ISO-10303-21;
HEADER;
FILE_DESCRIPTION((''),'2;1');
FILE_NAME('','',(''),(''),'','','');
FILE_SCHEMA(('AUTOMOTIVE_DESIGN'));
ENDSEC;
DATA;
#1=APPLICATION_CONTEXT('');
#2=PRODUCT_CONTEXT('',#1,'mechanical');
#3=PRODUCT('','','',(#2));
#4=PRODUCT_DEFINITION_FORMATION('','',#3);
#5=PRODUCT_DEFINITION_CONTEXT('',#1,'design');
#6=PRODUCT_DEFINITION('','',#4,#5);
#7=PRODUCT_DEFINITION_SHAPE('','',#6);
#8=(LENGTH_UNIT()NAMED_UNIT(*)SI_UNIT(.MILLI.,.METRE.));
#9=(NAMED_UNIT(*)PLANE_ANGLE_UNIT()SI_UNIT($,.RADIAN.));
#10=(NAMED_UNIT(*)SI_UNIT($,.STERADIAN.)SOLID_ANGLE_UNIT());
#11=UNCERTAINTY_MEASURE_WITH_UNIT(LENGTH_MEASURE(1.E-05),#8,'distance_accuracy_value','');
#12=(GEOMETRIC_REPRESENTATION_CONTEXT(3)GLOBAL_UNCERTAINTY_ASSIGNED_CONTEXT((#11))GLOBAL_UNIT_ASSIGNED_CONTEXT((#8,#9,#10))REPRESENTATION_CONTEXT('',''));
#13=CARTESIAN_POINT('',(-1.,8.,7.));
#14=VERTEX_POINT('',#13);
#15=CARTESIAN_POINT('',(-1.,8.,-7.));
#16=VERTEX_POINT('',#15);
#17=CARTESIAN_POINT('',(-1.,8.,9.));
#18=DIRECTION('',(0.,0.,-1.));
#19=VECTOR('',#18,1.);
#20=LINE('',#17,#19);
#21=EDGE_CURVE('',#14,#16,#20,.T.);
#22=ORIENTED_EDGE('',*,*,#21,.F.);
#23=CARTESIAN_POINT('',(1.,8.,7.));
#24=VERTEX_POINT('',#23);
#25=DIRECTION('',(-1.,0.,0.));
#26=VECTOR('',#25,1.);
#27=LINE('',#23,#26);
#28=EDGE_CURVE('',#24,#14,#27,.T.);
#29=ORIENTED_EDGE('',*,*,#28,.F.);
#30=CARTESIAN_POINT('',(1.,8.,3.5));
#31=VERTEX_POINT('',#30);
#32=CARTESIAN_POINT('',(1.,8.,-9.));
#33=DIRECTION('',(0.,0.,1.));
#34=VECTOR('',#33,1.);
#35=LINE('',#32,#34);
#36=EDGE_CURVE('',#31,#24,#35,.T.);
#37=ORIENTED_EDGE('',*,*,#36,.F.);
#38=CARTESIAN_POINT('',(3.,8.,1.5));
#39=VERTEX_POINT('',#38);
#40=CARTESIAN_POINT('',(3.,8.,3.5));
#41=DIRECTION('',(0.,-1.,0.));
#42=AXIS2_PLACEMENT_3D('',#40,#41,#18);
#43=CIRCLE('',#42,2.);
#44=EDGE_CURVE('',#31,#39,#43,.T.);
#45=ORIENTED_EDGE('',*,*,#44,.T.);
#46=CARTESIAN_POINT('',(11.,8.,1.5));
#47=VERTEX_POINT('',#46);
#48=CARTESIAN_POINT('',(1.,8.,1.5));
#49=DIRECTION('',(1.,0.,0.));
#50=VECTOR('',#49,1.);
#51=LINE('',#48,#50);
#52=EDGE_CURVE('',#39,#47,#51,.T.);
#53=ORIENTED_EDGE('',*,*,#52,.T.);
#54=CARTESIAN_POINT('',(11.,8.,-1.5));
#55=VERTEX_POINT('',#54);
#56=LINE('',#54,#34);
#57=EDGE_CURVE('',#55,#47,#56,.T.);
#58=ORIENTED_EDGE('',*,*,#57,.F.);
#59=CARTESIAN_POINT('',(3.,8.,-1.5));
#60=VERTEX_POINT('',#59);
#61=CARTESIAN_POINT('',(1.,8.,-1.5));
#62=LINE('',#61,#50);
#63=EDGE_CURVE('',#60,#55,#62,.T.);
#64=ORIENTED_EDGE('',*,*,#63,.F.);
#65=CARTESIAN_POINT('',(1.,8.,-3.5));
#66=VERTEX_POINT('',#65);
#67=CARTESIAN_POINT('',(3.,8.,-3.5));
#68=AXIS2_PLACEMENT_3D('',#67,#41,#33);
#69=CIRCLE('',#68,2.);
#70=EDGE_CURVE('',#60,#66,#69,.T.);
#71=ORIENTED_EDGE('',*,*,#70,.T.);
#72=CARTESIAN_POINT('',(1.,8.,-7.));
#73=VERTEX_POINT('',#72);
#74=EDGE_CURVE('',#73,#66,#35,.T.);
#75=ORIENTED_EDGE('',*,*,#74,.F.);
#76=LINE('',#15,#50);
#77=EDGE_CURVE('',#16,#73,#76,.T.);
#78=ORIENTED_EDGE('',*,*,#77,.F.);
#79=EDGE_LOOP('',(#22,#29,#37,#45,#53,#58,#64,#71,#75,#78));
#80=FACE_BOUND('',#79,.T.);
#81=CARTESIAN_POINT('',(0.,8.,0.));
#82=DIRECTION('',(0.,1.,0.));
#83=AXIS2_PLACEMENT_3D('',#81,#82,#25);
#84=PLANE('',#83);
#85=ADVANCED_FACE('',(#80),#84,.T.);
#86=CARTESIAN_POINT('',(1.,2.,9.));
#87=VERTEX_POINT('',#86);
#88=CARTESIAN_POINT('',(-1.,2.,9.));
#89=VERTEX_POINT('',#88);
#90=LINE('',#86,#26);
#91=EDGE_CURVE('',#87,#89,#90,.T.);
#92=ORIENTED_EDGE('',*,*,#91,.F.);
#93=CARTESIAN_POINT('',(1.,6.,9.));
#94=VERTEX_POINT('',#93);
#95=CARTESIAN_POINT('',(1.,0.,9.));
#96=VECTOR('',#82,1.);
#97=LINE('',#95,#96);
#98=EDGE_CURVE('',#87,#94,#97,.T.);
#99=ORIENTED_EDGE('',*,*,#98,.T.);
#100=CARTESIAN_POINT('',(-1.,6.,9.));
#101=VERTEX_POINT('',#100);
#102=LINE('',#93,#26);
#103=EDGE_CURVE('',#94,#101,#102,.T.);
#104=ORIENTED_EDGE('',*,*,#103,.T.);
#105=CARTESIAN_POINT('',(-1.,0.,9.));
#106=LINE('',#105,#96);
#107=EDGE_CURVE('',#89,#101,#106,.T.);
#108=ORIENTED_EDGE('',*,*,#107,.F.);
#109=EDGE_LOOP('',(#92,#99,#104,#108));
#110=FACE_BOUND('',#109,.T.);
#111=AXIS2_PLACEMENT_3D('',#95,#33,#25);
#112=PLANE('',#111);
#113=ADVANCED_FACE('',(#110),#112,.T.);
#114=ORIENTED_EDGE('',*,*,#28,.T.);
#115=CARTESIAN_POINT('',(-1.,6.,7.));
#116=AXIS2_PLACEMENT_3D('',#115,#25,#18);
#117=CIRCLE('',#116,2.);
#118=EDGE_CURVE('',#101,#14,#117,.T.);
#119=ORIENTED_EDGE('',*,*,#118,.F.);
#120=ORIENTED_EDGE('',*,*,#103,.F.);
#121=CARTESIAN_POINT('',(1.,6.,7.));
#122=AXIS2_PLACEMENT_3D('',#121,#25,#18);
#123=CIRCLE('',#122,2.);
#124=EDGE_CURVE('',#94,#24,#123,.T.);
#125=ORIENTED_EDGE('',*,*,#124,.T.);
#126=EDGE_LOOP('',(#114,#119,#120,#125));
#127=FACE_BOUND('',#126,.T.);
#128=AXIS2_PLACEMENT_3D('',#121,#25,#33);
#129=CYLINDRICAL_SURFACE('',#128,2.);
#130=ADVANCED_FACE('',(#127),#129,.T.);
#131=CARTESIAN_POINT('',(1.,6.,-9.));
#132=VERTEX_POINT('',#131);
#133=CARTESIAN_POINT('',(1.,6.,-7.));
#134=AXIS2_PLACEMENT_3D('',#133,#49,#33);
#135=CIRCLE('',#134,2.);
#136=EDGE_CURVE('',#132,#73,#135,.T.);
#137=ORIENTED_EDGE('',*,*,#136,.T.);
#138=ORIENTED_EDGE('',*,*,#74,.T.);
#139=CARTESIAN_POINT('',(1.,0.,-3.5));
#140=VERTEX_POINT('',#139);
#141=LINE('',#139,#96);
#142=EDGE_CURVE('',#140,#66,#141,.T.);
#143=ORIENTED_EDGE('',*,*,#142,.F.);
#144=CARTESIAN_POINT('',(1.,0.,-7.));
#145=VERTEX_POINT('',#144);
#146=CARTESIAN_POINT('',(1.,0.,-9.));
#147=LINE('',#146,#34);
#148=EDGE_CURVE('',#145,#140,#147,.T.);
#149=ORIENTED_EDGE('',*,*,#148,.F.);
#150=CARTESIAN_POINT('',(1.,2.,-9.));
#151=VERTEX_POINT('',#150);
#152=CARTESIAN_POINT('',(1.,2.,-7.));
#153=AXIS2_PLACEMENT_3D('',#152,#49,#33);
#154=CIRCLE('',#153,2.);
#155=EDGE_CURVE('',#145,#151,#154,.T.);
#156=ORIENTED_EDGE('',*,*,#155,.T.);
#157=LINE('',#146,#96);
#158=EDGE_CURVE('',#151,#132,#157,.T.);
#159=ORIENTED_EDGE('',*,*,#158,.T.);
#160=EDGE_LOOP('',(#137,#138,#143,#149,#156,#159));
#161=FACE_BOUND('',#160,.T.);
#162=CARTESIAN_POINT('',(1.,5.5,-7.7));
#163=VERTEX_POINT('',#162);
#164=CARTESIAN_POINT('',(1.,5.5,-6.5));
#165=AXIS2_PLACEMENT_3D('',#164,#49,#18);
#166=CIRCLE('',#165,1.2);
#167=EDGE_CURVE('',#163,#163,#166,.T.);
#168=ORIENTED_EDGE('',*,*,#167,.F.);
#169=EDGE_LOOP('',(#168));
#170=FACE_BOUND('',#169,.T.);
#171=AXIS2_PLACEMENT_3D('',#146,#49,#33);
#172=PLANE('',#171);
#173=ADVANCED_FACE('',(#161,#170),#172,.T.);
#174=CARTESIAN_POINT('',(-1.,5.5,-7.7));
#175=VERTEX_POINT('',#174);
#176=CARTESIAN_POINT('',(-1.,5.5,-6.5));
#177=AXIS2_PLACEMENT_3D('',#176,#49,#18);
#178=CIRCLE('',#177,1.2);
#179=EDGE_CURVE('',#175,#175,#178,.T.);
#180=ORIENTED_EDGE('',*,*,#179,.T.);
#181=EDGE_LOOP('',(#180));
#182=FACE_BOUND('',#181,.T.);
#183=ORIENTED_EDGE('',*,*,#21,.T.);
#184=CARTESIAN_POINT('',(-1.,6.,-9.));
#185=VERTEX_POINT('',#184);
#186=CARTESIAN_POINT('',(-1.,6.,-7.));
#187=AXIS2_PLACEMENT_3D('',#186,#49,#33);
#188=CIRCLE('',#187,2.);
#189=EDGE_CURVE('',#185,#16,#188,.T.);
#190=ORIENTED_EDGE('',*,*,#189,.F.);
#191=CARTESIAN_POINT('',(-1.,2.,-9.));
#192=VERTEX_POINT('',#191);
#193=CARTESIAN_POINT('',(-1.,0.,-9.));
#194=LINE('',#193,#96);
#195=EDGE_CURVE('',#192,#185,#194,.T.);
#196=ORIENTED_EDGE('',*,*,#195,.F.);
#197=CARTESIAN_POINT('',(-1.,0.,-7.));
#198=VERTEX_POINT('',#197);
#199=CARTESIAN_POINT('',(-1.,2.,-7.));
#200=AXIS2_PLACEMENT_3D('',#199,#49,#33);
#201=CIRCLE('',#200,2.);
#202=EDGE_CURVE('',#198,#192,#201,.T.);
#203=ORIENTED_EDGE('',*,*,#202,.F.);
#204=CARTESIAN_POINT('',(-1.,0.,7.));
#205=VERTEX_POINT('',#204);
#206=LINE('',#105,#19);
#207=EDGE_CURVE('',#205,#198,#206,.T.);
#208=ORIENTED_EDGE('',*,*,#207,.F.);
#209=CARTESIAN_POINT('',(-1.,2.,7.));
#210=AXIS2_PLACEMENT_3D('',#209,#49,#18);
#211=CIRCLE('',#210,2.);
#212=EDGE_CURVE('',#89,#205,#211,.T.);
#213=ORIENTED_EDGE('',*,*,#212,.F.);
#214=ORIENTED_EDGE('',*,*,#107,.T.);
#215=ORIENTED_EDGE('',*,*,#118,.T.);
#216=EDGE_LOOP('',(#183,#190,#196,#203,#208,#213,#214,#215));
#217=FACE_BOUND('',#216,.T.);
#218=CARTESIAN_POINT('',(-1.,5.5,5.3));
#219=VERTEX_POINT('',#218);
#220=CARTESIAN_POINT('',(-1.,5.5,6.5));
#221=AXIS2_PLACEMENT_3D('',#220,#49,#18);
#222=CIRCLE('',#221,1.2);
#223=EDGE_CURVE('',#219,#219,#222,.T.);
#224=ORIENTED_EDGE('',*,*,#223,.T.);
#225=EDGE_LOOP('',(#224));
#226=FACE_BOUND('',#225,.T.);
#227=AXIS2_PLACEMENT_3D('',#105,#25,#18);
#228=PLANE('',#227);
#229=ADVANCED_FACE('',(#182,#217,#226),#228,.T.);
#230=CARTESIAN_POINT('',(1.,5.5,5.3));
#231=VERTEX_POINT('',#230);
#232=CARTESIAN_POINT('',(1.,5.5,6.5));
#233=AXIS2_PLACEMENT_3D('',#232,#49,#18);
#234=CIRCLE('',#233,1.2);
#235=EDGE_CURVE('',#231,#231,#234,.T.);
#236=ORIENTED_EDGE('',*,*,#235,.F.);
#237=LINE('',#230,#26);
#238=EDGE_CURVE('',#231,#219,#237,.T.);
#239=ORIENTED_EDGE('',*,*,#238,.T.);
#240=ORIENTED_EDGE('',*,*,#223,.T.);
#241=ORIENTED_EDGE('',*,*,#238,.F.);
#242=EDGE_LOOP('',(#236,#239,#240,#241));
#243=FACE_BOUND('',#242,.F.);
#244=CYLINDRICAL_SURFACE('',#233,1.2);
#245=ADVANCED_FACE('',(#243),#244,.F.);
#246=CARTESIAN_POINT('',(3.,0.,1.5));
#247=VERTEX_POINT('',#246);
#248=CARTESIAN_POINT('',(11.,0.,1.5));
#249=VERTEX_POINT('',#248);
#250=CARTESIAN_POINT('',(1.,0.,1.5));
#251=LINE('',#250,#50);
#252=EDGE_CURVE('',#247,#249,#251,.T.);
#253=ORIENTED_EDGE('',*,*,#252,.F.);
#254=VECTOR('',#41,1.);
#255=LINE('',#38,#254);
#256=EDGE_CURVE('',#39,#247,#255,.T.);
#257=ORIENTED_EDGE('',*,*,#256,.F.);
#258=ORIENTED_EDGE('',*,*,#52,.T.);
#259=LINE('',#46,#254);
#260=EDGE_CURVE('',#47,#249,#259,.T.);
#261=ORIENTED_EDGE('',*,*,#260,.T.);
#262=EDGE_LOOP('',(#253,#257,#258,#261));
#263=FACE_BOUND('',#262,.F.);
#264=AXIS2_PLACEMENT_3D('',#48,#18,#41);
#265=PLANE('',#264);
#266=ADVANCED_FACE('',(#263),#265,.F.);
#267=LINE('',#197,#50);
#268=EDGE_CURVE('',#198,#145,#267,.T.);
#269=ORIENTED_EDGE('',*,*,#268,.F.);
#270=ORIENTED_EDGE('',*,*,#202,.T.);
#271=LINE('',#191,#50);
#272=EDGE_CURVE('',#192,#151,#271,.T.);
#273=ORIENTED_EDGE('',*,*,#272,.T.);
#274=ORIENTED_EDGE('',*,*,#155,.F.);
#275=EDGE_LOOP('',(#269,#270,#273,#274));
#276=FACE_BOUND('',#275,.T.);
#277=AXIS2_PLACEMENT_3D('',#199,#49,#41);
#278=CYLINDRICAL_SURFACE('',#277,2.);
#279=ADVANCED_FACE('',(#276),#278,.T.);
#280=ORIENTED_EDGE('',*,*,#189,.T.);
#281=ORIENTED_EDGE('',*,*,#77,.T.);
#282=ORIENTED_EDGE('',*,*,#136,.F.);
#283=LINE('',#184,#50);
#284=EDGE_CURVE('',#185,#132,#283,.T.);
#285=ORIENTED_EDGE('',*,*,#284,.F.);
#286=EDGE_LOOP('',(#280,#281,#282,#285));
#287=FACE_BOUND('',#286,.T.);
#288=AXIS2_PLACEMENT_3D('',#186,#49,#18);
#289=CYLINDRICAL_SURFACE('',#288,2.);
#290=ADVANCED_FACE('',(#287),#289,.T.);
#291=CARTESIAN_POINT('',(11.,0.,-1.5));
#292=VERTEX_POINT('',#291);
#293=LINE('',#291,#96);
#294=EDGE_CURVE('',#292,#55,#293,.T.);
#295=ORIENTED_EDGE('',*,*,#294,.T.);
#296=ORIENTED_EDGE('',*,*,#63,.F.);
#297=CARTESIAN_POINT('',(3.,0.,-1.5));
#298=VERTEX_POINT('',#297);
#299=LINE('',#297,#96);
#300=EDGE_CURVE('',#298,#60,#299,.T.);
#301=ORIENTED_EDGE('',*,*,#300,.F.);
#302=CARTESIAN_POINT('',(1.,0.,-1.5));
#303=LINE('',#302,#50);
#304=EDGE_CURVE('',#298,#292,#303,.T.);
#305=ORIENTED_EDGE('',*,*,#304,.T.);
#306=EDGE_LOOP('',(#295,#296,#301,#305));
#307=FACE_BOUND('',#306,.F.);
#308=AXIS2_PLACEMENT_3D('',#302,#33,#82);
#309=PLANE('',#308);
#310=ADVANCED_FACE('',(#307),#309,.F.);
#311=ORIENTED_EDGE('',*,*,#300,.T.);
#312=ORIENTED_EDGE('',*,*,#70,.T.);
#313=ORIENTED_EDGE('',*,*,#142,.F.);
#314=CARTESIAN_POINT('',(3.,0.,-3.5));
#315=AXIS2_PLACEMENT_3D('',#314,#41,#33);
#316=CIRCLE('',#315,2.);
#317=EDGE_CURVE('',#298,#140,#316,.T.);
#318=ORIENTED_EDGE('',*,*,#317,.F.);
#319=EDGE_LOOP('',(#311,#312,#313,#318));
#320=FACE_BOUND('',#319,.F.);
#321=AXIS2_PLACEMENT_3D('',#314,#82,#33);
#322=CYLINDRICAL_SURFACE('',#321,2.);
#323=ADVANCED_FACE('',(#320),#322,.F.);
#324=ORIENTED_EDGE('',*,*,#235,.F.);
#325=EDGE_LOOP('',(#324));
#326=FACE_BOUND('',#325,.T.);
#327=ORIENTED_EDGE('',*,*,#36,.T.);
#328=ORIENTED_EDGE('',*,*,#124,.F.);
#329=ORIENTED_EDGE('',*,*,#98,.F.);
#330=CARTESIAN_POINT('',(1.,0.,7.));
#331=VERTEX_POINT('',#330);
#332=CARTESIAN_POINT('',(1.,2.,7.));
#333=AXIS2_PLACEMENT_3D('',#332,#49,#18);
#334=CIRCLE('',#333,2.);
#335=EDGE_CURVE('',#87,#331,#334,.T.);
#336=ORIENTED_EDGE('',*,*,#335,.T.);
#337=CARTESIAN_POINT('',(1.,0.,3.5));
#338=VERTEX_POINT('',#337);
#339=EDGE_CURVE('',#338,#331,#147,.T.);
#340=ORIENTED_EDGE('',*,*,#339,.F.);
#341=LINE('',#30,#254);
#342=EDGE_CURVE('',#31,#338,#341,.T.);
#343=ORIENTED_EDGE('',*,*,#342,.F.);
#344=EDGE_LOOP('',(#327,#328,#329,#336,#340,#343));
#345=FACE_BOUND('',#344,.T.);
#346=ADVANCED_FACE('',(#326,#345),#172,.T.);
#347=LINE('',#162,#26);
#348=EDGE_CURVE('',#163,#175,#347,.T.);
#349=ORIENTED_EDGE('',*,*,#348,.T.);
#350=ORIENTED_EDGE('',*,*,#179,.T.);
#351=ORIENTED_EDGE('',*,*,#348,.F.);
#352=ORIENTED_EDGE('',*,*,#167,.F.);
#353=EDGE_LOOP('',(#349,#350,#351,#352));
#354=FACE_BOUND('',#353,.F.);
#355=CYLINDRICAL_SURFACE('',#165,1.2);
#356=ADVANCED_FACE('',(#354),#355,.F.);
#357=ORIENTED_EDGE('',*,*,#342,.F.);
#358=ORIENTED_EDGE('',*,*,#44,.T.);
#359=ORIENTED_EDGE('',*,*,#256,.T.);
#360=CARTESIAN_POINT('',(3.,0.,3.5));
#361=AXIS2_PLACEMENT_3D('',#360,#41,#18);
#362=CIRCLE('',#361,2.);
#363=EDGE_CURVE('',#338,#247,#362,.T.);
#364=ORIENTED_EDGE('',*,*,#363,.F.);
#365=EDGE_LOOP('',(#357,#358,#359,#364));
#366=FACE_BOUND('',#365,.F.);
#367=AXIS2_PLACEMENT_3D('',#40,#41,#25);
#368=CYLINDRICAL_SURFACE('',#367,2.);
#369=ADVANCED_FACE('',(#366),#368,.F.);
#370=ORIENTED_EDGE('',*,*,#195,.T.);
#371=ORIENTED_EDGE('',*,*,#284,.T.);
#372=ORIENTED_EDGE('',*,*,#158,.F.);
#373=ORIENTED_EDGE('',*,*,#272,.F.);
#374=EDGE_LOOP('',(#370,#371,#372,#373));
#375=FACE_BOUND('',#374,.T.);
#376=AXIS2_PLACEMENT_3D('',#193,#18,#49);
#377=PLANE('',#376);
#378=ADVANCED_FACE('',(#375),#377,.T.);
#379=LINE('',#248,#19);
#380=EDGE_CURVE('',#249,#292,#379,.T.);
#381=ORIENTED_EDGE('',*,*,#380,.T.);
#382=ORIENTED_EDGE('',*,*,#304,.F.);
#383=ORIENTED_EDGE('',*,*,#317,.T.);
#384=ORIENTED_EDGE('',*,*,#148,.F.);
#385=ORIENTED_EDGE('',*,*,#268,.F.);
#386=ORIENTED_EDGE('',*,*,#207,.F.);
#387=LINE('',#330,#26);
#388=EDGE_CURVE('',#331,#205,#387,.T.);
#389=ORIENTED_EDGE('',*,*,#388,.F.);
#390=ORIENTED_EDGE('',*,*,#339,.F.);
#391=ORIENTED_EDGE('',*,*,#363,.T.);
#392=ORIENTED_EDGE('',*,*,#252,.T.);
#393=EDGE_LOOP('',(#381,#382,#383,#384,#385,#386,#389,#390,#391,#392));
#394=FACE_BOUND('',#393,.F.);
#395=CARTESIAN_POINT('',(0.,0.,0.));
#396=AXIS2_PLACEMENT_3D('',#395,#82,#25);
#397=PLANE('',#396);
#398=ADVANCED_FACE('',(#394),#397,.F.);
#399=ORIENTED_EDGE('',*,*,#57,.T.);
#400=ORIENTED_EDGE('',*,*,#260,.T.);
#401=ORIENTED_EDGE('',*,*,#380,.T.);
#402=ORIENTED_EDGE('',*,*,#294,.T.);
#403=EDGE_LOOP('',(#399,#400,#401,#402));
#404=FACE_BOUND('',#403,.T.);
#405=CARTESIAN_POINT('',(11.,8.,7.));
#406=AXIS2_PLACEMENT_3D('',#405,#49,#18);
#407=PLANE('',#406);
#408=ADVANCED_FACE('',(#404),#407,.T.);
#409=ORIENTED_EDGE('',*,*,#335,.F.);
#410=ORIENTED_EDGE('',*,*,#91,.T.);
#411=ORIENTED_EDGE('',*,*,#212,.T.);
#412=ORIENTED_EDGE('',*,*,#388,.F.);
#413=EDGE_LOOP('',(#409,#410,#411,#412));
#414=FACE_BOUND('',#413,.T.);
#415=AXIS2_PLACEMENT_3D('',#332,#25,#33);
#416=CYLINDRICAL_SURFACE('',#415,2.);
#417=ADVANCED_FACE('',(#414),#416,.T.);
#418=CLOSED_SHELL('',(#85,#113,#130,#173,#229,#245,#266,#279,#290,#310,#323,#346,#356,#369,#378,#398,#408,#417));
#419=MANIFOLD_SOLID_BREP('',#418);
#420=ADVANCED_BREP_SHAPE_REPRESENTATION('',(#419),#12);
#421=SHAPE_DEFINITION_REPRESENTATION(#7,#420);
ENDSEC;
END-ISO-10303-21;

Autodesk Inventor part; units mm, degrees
ref_plane "YZ Plane" through (0, 0, 0) normal (1, 0, 0) x (0, 1, 0)
ref_plane "XZ Plane" through (0, 0, 0) normal (0, 1, 0) x (-1, 0, 0)
ref_plane "XY Plane" through (0, 0, 0) normal (0, 0, 1) x (1, 0, 0)
sketch "Sketch1" plane through (0, 0, 0) normal (0, 1, 0) x (-1, 0, 0)
  line L0 (-1, 9) -> (1, 9)
  line L1 (1, 9) -> (1, -9)
  line L2 (1, -9) -> (-1, -9)
  line L3 (-1, -9) -> (-1, 9)
  line L4 (-1, 9) -> (1, -9) construction
  line L5 (1, 9) -> (-1, -9) construction
  point P0 (0, 0)
  dimension "d0" = 18
  dimension "d1" = 2
extrude "Extrusion1" add sketch "Sketch1" along normal blind 8
fillet "Fillet1" radius 2 2 edges at (0, 8, 9) (0, 8, -9)
sketch "Sketch2" plane through (1, 0, 9) normal (1, 0, 0) x (0, 0, -1)
  circle A0 centre (2.5, 5.5) radius 1.2
  circle A1 centre (15.5, 5.5) radius 1.2
  line L0 (2, 8) -> (16, 8) projected
  line L1 (18, 0) -> (18, 6) projected
  line L2 (0, 0) -> (0, 6) projected
  point P0 (9, 0)
  point P1 (0, 3)
  dimension "d5" = 2.4
  dimension "d6" = 2.4
  dimension "d7" = 2.5
  dimension "d8" = 2.5
  dimension "d9" = 2.5
  dimension "d10" = 2.5
extrude "Extrusion2" cut sketch "Sketch2" against normal blind 2
fillet "Fillet2" radius 2 2 edges at (0, 0, 9) (0, 0, -9)
sketch "Sketch5" plane through (1, 8, 7) normal (1, 0, 0) x (0, 0, -1)
  line L0 (5.5, -8) -> (8.5, -8)
  line L1 (8.5, -8) -> (8.5, 0)
  line L2 (8.5, 0) -> (5.5, 0)
  line L3 (5.5, 0) -> (5.5, -8)
  line L4 (5.5, -8) -> (8.5, 0) construction
  line L5 (8.5, -8) -> (5.5, 0) construction
  line L6 (0, 0) -> (14, 0) projected
  line L7 (0, -8) -> (14, -8) projected
  line L8 (7, 0) -> (7, -8) construction
  line L9 (-2, -6) -> (-2, -2) projected
  line L10 (-2, -4) -> (16, -4) construction
  line L11 (16, -6) -> (16, -2) projected
  point P0 (7, -4)
  dimension "d14" = 3
extrude "Extrusion3" add sketch "Sketch5" along normal blind 10
fillet "Face Fillet1" radius 2 1 edges at (1, 4, 1.5)
fillet "Face Fillet2" radius 2 1 edges at (1, 4, -1.5)
properties part number "Uchwyt"
